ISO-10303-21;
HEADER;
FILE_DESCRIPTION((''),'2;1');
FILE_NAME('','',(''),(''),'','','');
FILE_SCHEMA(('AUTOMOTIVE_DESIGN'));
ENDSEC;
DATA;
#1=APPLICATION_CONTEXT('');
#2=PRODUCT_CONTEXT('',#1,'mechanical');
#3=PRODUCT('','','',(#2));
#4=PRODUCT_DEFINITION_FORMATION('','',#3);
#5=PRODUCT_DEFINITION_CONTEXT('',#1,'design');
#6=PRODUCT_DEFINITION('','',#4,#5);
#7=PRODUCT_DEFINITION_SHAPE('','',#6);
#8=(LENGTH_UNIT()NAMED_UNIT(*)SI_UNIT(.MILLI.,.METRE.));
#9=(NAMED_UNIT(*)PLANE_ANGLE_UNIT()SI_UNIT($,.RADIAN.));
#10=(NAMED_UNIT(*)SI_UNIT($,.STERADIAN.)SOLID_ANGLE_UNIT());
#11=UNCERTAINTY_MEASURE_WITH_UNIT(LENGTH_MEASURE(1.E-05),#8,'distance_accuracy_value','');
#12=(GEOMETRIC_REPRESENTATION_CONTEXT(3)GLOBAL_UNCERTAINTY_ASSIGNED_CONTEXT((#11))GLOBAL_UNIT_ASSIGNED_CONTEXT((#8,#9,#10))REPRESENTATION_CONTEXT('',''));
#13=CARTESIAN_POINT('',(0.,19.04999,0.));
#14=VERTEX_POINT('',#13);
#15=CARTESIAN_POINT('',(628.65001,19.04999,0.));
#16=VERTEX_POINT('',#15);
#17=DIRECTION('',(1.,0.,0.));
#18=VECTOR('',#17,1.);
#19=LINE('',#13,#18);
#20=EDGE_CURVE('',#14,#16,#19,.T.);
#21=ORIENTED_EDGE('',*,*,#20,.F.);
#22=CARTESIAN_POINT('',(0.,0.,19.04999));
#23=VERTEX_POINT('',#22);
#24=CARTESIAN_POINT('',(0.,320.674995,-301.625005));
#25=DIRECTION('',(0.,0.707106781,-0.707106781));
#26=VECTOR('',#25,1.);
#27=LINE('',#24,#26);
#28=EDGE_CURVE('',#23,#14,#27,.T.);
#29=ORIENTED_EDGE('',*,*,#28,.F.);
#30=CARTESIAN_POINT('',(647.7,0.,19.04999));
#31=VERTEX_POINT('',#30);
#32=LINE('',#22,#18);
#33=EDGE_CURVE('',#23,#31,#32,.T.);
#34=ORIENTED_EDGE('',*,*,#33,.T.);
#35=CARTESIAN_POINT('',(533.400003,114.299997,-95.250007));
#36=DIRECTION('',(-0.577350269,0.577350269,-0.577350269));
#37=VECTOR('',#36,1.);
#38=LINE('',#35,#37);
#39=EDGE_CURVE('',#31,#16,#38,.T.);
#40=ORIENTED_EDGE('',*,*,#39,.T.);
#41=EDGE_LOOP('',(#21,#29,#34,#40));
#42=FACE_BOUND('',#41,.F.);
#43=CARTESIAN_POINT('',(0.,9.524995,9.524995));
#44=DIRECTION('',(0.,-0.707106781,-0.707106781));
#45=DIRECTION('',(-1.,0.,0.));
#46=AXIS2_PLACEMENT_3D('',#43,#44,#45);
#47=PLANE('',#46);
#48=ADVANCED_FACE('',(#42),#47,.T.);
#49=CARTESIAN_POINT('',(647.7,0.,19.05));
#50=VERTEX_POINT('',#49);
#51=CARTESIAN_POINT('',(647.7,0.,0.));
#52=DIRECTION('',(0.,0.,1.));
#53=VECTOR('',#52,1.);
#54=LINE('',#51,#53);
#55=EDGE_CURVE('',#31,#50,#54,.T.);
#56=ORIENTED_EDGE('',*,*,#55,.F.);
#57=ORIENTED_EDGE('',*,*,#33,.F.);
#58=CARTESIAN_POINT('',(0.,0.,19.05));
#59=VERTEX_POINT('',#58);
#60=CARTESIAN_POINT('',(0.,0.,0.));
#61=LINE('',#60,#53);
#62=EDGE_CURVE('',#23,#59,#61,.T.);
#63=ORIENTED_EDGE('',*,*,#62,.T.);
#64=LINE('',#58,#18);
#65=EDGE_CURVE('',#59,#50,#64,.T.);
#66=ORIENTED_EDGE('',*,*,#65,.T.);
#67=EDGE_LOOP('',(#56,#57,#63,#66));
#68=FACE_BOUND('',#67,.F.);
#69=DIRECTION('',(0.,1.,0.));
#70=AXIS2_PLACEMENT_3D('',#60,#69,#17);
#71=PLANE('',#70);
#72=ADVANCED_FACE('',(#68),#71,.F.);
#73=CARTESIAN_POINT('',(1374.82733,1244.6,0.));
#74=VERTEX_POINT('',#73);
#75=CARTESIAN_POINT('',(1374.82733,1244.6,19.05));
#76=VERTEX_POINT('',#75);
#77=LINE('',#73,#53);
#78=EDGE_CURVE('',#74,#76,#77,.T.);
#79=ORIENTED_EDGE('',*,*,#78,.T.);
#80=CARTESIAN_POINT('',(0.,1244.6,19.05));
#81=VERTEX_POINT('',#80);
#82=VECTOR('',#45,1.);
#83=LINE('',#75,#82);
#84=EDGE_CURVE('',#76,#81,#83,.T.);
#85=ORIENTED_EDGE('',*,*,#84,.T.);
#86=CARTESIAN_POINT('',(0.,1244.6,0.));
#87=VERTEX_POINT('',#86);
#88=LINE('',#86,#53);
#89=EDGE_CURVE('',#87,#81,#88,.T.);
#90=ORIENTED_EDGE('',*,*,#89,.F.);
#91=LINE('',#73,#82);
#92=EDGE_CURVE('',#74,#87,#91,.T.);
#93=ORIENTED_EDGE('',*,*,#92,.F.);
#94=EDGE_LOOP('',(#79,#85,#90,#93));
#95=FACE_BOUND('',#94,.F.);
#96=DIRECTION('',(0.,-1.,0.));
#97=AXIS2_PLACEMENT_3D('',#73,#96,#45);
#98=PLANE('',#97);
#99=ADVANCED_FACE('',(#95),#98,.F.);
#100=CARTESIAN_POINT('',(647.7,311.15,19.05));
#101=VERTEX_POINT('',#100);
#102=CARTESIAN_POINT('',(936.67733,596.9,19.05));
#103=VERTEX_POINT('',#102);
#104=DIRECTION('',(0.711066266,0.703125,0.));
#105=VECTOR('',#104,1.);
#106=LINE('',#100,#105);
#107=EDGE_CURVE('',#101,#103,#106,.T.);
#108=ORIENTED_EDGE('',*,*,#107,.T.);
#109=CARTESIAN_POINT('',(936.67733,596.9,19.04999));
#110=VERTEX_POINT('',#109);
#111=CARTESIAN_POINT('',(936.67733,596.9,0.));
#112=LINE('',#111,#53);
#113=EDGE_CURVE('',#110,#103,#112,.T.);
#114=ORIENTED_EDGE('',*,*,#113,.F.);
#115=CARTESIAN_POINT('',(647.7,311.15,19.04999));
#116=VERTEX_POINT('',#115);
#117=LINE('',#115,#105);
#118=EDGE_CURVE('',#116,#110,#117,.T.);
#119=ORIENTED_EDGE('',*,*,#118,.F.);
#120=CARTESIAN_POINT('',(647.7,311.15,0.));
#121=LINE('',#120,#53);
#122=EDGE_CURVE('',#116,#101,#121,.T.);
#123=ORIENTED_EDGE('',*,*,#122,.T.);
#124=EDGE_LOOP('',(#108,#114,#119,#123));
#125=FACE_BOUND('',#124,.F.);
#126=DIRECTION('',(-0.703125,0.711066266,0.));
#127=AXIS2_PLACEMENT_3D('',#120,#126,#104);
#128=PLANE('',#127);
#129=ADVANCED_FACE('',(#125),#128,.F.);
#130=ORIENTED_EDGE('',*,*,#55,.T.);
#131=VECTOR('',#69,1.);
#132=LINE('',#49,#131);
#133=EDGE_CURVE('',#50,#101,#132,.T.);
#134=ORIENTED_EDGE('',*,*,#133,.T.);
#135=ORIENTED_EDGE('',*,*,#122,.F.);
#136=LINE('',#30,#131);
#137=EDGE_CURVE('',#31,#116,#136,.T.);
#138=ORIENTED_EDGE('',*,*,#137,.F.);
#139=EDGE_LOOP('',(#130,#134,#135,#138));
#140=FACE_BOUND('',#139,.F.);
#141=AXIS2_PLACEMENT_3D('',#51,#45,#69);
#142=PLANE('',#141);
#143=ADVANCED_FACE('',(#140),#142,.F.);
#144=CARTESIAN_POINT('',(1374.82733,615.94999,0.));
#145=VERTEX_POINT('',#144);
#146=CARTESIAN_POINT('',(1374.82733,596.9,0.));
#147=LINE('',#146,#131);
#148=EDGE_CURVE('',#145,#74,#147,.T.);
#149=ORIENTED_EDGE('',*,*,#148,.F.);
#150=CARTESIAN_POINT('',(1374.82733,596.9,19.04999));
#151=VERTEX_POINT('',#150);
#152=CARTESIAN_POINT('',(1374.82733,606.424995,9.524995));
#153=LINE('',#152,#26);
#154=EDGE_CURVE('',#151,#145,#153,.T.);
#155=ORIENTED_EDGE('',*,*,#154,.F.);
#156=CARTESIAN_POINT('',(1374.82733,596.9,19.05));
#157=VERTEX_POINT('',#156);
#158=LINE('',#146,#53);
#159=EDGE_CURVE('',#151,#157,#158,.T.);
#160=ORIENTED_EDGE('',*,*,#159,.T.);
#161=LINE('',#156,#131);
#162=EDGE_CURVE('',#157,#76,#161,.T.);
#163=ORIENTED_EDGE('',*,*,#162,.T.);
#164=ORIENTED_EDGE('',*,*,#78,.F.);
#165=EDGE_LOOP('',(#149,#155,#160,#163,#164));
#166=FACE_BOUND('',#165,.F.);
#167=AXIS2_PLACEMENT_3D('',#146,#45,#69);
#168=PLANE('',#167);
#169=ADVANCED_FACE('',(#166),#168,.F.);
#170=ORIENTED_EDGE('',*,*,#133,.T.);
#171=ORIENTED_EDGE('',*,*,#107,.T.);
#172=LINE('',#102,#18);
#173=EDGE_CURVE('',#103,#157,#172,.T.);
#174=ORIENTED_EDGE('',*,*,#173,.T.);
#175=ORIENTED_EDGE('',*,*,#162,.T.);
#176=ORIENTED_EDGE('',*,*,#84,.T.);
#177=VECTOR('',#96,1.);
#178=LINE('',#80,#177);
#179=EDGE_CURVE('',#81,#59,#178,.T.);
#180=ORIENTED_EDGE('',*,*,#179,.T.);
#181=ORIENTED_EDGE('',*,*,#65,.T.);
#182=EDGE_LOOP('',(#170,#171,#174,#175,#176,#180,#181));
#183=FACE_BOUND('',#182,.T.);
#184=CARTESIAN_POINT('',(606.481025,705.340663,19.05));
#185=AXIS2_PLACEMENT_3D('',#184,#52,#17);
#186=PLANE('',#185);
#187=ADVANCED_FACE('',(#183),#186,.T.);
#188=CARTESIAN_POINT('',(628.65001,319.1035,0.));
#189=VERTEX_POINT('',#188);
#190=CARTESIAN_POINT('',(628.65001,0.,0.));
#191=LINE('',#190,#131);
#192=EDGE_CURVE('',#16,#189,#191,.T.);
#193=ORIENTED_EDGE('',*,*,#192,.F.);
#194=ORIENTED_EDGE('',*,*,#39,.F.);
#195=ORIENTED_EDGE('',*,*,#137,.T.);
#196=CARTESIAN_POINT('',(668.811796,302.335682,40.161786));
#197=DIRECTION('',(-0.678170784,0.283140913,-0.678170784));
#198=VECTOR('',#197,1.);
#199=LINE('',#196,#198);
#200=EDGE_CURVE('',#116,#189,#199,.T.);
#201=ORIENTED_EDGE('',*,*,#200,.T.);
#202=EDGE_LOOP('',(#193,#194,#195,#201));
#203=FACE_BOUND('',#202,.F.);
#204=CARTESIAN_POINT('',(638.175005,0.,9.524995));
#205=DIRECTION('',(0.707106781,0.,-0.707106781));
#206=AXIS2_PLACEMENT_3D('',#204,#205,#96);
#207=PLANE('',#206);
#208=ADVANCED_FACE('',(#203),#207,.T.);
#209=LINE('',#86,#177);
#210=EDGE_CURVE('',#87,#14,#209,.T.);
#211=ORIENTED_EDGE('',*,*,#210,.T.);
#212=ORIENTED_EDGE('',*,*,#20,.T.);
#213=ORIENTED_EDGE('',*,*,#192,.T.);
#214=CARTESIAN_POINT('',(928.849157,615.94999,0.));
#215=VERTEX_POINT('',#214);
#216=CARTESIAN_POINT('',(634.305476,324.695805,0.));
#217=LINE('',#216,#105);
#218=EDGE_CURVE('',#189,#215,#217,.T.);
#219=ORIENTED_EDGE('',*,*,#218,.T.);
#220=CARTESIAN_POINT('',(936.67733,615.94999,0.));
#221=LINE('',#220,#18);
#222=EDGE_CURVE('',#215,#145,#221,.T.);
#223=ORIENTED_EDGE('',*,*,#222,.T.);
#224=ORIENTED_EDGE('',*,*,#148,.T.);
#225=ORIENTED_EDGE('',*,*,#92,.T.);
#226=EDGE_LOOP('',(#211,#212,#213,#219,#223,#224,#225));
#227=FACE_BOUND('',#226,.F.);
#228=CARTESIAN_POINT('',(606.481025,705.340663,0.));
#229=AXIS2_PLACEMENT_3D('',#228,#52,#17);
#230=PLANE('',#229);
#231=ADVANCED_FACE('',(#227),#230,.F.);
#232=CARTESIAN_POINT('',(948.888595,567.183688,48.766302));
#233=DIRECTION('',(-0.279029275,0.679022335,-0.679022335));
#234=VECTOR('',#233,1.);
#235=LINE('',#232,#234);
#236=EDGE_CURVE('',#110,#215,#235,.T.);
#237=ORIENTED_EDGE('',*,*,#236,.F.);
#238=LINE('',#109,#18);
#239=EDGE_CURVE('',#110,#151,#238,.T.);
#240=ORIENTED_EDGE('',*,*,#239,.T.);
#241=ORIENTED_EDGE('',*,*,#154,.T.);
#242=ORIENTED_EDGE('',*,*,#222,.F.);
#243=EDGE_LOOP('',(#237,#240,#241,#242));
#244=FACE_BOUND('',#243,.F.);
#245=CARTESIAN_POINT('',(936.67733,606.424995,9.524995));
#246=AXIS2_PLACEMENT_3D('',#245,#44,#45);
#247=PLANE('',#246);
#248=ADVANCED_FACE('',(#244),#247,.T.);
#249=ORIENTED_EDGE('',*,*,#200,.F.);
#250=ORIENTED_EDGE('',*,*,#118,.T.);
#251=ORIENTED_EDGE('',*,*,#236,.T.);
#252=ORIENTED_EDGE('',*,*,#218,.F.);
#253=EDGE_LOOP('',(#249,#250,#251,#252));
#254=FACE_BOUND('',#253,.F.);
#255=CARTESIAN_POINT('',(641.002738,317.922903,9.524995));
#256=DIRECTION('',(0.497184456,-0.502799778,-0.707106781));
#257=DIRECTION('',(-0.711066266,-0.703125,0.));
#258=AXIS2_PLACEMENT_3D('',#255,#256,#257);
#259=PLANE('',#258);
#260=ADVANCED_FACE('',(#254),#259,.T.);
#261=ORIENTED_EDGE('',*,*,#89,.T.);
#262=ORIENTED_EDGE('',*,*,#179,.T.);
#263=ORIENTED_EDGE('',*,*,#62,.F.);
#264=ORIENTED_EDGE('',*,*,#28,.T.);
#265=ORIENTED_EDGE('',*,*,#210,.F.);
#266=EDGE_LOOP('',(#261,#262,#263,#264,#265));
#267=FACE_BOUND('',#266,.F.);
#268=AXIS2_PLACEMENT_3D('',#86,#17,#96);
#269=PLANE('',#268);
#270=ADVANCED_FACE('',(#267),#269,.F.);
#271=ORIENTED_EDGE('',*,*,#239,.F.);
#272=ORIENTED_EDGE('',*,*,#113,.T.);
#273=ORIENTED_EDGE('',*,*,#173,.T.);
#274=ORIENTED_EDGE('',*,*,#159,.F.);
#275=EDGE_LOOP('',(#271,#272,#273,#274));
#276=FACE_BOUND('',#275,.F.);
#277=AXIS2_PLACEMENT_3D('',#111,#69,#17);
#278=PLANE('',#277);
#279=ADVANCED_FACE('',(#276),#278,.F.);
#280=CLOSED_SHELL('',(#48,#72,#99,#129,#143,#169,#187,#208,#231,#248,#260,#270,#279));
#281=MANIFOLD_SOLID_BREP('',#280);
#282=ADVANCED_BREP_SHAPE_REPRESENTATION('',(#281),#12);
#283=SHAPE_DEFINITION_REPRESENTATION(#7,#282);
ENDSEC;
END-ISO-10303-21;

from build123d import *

# Parameters (mm, degrees)
F1_DEPTH = 19.05
F2_SIZE  = 19.04999


# Not quite as in the source:
# - a fillet or chamfer is up to 0.001 mm smaller than in the source, because OpenCascade refuses the exact size


with BuildPart() as f1:
    # F0 (on Top) → F1 (new body)
    with BuildSketch(Plane.XY):
        Polygon((0, 1244.6), (0, 0), (647.7, 0), (647.7, 311.15), (936.6773304258, 596.9), (1374.8273304258, 596.9), (1374.8273304258, 1244.6), align=None)
    extrude(amount=F1_DEPTH)

    # F2 (size 19.05 in the source; OpenCascade refuses exactly that, so slightly less here)
    f2_edges = [f1.edges().sort_by_distance(p)[0] for p in [
        (647.7, 155.575, 0),
        (792.188665, 454.025, 0),
        (1155.75233, 596.9, 0),
        (323.85, 0, 0),
    ]]
    chamfer(f2_edges, length=F2_SIZE)


solid = f1.part
